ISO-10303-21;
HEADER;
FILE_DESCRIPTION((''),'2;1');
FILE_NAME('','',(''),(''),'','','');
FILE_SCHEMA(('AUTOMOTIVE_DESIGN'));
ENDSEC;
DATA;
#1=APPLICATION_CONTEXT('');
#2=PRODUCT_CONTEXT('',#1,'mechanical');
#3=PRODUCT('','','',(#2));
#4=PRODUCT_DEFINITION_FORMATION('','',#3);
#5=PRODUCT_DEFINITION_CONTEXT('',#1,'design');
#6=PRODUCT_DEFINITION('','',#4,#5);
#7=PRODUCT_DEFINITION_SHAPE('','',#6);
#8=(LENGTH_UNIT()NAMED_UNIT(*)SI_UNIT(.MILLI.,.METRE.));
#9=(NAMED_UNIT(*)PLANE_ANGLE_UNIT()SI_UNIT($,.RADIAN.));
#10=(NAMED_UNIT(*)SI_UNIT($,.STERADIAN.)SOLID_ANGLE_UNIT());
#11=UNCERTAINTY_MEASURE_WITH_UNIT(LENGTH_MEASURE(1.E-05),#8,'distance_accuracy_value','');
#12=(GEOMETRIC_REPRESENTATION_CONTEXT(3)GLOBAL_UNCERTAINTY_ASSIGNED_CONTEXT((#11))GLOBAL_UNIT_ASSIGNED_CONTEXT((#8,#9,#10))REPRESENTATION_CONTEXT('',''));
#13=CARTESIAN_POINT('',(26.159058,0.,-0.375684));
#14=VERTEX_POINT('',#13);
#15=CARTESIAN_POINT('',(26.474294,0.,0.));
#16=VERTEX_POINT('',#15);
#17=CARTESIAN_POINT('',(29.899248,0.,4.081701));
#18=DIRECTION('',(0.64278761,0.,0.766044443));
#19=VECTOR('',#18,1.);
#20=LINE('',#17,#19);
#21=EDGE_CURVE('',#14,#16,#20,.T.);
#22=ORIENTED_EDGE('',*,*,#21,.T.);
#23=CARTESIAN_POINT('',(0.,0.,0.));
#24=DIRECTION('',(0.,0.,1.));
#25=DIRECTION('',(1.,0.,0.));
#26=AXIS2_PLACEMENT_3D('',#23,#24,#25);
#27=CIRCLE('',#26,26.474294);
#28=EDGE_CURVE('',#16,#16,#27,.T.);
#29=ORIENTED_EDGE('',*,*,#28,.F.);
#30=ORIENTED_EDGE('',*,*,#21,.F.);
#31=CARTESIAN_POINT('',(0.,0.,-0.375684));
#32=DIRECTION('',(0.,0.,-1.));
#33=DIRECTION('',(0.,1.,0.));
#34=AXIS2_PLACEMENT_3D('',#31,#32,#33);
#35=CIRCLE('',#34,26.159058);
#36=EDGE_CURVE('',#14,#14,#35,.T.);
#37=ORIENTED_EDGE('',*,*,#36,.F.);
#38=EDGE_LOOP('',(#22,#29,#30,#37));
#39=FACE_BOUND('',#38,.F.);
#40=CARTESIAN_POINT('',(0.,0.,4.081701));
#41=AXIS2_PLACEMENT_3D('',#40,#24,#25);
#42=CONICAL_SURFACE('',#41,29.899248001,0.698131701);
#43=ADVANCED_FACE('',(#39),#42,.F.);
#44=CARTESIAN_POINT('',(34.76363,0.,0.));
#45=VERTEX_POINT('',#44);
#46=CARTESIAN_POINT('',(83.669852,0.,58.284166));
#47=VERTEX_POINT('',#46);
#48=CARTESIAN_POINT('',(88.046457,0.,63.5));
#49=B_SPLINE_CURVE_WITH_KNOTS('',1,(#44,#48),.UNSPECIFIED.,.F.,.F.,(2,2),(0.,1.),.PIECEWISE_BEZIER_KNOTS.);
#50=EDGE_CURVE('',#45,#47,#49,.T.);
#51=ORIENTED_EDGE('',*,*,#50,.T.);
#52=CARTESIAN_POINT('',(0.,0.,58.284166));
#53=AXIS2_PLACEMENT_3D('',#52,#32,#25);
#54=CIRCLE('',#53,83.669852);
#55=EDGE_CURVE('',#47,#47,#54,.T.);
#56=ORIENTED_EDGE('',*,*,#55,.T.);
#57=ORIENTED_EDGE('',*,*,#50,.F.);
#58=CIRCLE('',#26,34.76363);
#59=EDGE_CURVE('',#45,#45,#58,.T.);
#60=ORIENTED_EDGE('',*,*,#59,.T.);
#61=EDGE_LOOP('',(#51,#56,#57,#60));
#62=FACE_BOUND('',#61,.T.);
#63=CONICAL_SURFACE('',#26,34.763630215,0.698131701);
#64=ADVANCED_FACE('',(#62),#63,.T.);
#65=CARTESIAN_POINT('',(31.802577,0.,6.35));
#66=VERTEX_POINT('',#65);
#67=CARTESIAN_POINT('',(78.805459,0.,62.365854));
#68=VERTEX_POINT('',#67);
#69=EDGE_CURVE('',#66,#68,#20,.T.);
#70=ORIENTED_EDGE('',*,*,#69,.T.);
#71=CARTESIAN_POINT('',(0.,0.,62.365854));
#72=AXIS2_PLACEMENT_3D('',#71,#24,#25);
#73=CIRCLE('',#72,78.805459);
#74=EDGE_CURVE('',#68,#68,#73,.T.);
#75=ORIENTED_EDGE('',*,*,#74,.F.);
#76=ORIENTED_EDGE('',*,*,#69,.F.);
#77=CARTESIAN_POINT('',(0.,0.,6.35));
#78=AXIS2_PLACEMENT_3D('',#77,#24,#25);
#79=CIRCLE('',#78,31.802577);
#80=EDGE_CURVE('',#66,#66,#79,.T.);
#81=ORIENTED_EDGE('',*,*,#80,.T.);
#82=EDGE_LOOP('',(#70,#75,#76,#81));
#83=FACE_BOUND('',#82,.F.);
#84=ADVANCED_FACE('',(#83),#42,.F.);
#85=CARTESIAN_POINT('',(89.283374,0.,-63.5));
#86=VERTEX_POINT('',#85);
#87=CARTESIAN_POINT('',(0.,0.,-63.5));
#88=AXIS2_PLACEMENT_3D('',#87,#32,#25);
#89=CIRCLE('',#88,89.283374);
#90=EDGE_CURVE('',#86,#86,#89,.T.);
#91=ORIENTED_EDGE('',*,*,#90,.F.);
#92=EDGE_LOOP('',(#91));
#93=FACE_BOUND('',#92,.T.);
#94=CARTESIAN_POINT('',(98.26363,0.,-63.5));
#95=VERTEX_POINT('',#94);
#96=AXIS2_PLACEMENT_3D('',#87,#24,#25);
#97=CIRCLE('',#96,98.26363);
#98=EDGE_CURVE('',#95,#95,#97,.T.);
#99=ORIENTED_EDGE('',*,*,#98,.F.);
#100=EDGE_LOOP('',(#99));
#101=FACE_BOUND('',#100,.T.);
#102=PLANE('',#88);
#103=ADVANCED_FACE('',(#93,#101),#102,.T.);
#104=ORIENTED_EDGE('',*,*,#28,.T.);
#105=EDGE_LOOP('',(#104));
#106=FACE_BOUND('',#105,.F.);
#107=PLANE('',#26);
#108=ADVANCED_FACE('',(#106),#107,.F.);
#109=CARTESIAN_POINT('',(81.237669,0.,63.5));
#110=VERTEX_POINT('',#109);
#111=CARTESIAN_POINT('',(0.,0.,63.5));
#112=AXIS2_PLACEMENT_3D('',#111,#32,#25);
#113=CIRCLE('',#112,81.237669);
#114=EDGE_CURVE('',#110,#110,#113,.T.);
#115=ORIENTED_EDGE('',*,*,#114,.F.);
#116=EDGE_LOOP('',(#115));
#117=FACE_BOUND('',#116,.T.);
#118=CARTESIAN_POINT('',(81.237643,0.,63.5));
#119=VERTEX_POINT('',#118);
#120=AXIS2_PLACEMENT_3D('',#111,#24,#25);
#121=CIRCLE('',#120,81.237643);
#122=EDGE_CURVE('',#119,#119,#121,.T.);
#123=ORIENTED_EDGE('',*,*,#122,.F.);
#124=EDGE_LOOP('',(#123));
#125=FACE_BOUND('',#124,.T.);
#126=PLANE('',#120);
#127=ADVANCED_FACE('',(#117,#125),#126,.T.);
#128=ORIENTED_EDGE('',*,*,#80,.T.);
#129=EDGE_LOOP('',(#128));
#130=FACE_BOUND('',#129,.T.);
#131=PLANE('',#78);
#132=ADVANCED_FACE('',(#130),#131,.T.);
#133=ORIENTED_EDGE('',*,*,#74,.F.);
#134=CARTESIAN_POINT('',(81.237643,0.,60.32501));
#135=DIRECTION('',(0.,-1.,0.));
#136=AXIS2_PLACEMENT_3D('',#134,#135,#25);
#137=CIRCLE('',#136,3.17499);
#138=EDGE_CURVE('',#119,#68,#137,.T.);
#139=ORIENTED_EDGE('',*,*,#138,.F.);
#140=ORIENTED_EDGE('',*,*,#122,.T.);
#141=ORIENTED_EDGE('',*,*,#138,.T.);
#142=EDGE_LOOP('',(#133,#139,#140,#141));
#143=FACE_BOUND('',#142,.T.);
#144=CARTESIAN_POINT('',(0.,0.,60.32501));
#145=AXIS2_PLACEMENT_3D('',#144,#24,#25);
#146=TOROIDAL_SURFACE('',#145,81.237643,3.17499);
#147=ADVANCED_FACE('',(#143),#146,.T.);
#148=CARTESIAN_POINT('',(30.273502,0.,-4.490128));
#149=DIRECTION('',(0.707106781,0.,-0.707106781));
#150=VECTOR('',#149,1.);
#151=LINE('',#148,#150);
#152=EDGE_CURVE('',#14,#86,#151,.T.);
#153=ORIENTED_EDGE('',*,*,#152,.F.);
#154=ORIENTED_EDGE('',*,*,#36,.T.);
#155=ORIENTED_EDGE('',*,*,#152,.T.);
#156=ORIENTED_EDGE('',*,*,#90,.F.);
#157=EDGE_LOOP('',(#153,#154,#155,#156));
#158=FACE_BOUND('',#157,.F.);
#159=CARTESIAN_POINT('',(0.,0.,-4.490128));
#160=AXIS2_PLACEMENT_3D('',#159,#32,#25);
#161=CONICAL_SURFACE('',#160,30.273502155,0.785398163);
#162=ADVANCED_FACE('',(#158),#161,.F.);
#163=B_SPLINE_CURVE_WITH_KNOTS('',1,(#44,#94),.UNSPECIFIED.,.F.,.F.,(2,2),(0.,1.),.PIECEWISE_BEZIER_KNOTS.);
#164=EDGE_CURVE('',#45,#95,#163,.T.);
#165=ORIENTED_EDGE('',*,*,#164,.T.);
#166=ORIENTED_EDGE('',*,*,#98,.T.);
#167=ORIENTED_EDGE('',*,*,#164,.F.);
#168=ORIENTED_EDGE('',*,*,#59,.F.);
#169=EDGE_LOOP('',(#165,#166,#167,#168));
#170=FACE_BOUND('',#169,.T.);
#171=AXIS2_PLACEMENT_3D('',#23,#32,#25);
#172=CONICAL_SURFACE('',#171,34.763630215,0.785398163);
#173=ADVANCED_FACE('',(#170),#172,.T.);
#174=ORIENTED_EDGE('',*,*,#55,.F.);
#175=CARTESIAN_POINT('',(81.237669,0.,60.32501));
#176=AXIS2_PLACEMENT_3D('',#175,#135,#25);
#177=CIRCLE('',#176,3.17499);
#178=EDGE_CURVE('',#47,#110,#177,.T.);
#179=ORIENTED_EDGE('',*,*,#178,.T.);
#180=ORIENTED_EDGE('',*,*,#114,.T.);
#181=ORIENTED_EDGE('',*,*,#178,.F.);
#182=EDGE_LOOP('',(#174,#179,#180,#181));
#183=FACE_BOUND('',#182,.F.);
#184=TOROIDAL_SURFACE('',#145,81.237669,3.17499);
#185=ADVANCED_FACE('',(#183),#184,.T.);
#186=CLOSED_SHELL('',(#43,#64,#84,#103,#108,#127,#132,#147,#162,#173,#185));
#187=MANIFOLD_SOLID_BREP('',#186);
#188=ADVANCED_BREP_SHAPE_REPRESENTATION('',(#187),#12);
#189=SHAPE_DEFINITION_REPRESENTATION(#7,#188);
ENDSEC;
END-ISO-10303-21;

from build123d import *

# Parameters (mm, degrees)
F0_R      = 34.7636302152
F1_DEPTH  = 63.5
F1_TAPER  = -40
F2_T      = -6.35
F3_R      = 3.17499
F1_FACE_R = 34.7636302152
F4_DEPTH  = 63.5
F4_TAPER  = -45
F5_T      = -6.35


# Not quite as in the source:
# - a fillet or chamfer is up to 0.001 mm smaller than in the source, because OpenCascade refuses the exact size


with BuildPart() as f1:
    # F0 (on Top) → F1 (new body)
    with BuildSketch(Plane.XY):
        Circle(F0_R)
    extrude(amount=F1_DEPTH, taper=F1_TAPER)

    # F2
    f2_openings = [f1.faces().sort_by_distance(p)[0] for p in [
        (0, 0, 63.5),
    ]]
    offset(amount=F2_T, openings=f2_openings, kind=Kind.INTERSECTION)

    # F3 (radius 3.175 in the source; OpenCascade refuses exactly that, so slightly less here)
    f3_edges = [f1.edges().sort_by_distance(p)[0] for p in [
        (-88.046457, 0, 63.5),
        (-79.757121, 0, 63.5),
    ]]
    fillet(f3_edges, radius=F3_R)

    # F1_face (on face) → F4 (join)
    with BuildSketch(Plane(origin=(0, 0, 0), x_dir=(1, 0, 0), z_dir=(0, 0, -1))):
        Circle(F1_FACE_R)
    extrude(amount=F4_DEPTH, taper=F4_TAPER)

    # F5
    f5_openings = [f1.faces().sort_by_distance(p)[0] for p in [
        (0, 0, -63.5),
    ]]
    offset(amount=F5_T, openings=f5_openings, kind=Kind.INTERSECTION)


solid = f1.part
